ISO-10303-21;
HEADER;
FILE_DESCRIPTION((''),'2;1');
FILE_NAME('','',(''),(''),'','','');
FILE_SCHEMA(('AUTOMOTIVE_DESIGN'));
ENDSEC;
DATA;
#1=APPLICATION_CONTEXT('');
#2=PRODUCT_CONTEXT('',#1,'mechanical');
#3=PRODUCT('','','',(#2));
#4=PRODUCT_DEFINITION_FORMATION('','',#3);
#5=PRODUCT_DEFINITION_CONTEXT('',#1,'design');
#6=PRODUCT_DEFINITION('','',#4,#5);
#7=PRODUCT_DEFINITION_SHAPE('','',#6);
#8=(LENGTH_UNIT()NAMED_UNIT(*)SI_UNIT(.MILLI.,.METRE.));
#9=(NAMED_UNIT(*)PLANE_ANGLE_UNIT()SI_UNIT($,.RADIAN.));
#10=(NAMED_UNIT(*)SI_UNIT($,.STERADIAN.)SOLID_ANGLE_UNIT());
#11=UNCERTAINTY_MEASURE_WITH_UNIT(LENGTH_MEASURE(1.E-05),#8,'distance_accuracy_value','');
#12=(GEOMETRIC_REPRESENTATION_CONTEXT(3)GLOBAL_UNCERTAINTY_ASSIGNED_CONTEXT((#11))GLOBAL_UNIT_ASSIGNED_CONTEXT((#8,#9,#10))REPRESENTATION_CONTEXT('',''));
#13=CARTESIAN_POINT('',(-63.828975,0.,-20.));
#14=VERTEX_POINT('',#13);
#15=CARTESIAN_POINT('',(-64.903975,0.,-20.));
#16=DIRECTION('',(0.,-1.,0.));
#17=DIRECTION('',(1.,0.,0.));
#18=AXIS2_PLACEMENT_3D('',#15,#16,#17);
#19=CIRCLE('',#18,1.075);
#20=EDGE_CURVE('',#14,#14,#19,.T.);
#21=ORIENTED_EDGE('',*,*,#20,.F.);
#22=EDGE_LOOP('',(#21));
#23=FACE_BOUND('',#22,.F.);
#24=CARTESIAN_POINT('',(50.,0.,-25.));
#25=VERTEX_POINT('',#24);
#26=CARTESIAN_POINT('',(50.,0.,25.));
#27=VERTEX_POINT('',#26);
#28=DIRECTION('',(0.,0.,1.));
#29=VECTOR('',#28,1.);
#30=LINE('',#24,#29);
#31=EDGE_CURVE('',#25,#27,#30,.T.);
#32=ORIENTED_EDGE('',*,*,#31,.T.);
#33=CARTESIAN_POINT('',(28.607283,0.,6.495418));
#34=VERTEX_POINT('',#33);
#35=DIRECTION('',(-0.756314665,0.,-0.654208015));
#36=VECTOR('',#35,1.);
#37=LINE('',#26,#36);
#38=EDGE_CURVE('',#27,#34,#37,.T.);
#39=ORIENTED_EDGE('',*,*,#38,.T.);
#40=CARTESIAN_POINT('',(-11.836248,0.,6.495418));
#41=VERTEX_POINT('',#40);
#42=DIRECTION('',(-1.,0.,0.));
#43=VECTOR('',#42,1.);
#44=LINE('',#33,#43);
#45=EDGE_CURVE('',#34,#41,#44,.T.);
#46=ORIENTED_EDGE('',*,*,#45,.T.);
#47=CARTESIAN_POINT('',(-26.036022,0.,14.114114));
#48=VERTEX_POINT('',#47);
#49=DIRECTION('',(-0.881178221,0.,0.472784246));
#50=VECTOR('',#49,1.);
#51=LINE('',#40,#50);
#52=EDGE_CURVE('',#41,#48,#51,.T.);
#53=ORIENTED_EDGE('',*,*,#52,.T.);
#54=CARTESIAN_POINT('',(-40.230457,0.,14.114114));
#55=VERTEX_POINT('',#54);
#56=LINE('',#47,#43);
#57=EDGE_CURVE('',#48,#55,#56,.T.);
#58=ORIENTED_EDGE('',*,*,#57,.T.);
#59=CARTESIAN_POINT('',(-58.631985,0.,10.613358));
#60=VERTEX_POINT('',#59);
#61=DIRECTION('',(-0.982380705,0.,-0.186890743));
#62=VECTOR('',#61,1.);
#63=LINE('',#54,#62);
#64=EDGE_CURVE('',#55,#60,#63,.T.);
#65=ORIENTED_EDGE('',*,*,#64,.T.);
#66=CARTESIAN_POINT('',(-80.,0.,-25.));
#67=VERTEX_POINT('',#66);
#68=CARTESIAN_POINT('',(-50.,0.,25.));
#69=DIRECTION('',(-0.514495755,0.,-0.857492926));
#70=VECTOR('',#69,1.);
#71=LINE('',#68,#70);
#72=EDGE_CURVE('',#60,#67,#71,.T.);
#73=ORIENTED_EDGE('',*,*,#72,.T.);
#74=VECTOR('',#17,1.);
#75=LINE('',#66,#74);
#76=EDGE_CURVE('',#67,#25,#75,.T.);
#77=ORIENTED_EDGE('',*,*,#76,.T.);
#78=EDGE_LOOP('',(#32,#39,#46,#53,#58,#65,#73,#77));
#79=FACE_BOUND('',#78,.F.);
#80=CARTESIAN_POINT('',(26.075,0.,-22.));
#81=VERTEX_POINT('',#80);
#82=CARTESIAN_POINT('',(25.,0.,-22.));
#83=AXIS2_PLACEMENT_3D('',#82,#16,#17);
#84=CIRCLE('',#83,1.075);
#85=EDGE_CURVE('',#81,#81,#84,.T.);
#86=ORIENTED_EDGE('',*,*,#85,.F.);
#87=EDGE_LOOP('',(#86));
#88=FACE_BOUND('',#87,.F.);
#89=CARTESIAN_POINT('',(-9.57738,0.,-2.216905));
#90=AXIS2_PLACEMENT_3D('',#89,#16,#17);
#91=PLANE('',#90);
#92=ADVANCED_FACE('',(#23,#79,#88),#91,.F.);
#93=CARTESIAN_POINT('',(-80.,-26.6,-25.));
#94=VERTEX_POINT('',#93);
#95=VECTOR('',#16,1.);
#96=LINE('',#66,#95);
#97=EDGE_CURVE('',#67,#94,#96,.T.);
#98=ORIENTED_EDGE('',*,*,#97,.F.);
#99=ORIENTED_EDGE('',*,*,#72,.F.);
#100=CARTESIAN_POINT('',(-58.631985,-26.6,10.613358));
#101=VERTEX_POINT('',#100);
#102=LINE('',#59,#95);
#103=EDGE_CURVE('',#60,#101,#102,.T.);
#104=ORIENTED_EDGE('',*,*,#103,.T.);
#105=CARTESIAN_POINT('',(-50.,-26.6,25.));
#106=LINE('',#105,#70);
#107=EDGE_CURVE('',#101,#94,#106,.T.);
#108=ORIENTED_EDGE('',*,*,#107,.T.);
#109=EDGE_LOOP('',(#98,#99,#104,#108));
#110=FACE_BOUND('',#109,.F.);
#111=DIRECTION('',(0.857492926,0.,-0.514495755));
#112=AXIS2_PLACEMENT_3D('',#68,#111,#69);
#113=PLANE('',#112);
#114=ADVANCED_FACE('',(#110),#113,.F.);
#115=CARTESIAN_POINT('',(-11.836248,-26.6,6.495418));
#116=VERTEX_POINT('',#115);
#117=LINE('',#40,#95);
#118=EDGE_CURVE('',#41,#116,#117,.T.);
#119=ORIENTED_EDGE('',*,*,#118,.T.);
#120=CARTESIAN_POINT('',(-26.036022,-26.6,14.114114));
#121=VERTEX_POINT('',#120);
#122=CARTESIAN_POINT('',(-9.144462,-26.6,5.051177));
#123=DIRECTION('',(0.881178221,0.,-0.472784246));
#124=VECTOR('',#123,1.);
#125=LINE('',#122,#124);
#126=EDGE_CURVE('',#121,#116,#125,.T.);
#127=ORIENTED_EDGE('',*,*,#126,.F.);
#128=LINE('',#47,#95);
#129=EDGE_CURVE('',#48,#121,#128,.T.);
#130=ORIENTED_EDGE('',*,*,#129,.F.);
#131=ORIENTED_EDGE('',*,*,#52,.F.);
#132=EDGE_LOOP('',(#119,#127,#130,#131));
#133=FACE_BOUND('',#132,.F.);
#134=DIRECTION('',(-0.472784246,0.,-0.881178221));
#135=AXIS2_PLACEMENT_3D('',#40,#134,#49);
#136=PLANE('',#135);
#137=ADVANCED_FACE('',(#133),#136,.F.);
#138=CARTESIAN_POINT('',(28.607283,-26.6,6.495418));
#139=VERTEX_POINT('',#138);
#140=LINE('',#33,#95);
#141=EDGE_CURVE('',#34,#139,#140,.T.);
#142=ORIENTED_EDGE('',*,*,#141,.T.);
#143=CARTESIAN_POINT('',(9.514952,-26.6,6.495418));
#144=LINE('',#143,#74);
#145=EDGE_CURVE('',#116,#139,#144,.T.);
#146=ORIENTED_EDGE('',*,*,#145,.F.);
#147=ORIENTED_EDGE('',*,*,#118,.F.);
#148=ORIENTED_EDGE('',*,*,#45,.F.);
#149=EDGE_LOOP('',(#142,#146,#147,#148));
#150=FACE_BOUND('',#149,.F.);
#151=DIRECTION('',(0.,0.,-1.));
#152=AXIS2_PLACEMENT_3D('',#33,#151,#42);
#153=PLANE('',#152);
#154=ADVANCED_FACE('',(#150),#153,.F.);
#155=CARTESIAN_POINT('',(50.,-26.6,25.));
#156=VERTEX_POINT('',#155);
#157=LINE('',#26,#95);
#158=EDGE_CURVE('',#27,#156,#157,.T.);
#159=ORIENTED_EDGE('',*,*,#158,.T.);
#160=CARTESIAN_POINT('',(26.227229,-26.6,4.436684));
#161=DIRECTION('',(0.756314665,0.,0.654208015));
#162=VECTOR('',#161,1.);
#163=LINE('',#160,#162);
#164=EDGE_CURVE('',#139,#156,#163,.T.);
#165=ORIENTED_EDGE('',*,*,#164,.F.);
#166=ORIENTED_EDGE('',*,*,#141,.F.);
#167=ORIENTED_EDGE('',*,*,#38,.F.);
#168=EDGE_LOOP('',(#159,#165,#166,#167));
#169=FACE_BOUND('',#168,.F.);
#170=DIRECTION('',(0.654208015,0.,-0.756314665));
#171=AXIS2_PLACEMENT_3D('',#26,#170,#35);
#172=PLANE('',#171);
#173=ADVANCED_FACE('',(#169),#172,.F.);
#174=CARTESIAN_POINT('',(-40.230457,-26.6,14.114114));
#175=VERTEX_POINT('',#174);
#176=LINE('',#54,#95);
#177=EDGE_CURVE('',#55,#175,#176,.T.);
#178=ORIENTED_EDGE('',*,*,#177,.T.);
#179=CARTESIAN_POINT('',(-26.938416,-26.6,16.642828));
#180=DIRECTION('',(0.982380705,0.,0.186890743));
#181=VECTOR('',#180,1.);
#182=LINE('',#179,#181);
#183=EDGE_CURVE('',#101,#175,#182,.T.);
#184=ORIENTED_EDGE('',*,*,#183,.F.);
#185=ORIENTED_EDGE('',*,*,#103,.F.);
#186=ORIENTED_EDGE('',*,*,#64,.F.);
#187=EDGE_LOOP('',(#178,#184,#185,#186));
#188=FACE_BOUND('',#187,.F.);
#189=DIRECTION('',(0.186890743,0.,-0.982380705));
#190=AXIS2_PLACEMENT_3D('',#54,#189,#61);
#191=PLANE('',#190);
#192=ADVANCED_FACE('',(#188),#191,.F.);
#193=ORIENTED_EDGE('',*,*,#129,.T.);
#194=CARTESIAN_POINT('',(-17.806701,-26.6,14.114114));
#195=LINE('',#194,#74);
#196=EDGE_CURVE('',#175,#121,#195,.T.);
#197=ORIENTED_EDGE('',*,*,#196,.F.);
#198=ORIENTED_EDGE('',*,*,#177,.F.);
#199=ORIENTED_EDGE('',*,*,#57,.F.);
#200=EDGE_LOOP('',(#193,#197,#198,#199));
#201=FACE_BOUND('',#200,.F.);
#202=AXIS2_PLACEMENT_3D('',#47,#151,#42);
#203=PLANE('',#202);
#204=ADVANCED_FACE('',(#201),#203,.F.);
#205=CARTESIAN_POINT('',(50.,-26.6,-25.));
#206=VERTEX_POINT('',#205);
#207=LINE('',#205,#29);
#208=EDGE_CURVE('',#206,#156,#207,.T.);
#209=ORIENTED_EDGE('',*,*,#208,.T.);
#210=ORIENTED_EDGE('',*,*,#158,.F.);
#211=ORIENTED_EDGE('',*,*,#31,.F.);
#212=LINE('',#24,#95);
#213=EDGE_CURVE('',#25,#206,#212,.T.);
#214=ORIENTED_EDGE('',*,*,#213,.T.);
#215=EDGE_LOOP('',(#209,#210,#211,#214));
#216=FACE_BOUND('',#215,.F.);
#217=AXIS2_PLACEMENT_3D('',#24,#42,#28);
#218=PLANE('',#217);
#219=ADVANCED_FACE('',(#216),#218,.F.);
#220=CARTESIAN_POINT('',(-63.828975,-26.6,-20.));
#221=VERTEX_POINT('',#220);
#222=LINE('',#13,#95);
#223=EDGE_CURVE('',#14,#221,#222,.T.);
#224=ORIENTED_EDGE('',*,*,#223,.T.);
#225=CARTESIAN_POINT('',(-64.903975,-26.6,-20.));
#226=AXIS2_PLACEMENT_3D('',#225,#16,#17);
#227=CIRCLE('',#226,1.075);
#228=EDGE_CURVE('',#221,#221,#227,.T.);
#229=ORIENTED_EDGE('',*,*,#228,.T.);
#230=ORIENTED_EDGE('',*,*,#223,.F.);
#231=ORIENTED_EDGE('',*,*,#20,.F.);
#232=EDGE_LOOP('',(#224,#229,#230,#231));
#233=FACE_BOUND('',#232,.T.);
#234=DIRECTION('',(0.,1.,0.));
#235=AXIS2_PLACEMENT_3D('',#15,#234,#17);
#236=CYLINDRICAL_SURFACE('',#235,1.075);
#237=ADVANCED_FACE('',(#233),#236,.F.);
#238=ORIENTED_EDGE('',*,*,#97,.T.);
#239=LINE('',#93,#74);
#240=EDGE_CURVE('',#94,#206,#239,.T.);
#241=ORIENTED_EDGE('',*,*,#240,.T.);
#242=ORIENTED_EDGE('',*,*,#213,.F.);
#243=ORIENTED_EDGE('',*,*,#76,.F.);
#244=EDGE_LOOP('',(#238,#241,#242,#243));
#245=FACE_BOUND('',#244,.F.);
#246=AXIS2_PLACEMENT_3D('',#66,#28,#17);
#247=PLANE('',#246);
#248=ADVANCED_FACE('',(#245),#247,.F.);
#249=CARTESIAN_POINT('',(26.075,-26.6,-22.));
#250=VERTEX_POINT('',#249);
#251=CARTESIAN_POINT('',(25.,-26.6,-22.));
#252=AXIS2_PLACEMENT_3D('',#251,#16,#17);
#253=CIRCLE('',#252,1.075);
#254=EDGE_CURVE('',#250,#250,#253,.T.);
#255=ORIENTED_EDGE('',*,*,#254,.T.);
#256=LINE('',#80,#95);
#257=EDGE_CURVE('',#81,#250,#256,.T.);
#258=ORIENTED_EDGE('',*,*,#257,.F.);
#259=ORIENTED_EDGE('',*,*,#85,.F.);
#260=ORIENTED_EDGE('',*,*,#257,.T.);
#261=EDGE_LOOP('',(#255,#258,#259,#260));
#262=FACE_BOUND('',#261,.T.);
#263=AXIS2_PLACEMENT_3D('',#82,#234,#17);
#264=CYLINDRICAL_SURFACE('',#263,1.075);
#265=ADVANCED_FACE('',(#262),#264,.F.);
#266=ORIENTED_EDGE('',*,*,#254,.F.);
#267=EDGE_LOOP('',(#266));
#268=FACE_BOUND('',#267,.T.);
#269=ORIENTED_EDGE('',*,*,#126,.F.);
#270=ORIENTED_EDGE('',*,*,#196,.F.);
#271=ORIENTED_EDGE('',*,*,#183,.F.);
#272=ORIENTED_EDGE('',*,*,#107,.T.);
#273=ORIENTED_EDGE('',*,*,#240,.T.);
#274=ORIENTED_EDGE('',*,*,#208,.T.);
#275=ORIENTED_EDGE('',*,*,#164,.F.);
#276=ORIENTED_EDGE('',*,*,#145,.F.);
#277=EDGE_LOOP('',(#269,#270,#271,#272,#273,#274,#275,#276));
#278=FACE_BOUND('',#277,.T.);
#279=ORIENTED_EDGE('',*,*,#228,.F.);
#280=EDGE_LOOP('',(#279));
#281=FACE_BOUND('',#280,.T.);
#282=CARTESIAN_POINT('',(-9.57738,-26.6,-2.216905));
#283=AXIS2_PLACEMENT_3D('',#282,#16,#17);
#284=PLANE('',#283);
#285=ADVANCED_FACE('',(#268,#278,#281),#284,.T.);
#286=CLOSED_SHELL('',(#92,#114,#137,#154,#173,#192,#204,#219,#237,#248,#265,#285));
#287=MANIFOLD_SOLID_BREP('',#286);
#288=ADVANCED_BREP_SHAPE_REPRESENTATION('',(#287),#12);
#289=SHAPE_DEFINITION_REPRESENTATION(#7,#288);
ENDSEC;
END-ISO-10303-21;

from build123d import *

# Parameters (mm, degrees)
F0_R     = 1.075
F1_DEPTH = 26.6
F2_DEPTH = 158
F4_DEPTH = 26.601


# Not quite as in the source:
# - an extrude ends at something that could not be found from the text; its depth is read off the source's solid


with BuildPart() as f1:
    # F0 (on Front) → F1 (new body)
    with BuildSketch(Plane.XZ):
        Polygon((50, 25), (-50, 25), (-80, -25), (-50, -25), (25, -25), (50, -25), align=None)
        with Locations((-64.9039745331, -20)):
            Circle(F0_R, mode=Mode.SUBTRACT)
        with Locations((25, -22)):
            Circle(F0_R, mode=Mode.SUBTRACT)
    extrude(amount=F1_DEPTH)

    # F0 (on Front) → F2 (cut, through all)
    with BuildSketch(Plane.XZ):
        with Locations((-64.9039745331, -20)):
            Circle(F0_R)
    extrude(amount=-F2_DEPTH, mode=Mode.SUBTRACT)

    # F3 (on face) → F4 (cut, through all)
    with BuildSketch(Plane(origin=(0, 0, 0), x_dir=(-1, 0, 0), z_dir=(0, 1, 0))):
        Polygon((50, 25), (-50, 25), (-28.6072827876, 6.4954175614), (11.8362475187, 6.4954175614), (26.036022231, 14.1141144559), (40.2304567397, 14.1141144559), (58.63198501, 10.6133583166), align=None)
    extrude(amount=-F4_DEPTH, mode=Mode.SUBTRACT)


solid = f1.part
